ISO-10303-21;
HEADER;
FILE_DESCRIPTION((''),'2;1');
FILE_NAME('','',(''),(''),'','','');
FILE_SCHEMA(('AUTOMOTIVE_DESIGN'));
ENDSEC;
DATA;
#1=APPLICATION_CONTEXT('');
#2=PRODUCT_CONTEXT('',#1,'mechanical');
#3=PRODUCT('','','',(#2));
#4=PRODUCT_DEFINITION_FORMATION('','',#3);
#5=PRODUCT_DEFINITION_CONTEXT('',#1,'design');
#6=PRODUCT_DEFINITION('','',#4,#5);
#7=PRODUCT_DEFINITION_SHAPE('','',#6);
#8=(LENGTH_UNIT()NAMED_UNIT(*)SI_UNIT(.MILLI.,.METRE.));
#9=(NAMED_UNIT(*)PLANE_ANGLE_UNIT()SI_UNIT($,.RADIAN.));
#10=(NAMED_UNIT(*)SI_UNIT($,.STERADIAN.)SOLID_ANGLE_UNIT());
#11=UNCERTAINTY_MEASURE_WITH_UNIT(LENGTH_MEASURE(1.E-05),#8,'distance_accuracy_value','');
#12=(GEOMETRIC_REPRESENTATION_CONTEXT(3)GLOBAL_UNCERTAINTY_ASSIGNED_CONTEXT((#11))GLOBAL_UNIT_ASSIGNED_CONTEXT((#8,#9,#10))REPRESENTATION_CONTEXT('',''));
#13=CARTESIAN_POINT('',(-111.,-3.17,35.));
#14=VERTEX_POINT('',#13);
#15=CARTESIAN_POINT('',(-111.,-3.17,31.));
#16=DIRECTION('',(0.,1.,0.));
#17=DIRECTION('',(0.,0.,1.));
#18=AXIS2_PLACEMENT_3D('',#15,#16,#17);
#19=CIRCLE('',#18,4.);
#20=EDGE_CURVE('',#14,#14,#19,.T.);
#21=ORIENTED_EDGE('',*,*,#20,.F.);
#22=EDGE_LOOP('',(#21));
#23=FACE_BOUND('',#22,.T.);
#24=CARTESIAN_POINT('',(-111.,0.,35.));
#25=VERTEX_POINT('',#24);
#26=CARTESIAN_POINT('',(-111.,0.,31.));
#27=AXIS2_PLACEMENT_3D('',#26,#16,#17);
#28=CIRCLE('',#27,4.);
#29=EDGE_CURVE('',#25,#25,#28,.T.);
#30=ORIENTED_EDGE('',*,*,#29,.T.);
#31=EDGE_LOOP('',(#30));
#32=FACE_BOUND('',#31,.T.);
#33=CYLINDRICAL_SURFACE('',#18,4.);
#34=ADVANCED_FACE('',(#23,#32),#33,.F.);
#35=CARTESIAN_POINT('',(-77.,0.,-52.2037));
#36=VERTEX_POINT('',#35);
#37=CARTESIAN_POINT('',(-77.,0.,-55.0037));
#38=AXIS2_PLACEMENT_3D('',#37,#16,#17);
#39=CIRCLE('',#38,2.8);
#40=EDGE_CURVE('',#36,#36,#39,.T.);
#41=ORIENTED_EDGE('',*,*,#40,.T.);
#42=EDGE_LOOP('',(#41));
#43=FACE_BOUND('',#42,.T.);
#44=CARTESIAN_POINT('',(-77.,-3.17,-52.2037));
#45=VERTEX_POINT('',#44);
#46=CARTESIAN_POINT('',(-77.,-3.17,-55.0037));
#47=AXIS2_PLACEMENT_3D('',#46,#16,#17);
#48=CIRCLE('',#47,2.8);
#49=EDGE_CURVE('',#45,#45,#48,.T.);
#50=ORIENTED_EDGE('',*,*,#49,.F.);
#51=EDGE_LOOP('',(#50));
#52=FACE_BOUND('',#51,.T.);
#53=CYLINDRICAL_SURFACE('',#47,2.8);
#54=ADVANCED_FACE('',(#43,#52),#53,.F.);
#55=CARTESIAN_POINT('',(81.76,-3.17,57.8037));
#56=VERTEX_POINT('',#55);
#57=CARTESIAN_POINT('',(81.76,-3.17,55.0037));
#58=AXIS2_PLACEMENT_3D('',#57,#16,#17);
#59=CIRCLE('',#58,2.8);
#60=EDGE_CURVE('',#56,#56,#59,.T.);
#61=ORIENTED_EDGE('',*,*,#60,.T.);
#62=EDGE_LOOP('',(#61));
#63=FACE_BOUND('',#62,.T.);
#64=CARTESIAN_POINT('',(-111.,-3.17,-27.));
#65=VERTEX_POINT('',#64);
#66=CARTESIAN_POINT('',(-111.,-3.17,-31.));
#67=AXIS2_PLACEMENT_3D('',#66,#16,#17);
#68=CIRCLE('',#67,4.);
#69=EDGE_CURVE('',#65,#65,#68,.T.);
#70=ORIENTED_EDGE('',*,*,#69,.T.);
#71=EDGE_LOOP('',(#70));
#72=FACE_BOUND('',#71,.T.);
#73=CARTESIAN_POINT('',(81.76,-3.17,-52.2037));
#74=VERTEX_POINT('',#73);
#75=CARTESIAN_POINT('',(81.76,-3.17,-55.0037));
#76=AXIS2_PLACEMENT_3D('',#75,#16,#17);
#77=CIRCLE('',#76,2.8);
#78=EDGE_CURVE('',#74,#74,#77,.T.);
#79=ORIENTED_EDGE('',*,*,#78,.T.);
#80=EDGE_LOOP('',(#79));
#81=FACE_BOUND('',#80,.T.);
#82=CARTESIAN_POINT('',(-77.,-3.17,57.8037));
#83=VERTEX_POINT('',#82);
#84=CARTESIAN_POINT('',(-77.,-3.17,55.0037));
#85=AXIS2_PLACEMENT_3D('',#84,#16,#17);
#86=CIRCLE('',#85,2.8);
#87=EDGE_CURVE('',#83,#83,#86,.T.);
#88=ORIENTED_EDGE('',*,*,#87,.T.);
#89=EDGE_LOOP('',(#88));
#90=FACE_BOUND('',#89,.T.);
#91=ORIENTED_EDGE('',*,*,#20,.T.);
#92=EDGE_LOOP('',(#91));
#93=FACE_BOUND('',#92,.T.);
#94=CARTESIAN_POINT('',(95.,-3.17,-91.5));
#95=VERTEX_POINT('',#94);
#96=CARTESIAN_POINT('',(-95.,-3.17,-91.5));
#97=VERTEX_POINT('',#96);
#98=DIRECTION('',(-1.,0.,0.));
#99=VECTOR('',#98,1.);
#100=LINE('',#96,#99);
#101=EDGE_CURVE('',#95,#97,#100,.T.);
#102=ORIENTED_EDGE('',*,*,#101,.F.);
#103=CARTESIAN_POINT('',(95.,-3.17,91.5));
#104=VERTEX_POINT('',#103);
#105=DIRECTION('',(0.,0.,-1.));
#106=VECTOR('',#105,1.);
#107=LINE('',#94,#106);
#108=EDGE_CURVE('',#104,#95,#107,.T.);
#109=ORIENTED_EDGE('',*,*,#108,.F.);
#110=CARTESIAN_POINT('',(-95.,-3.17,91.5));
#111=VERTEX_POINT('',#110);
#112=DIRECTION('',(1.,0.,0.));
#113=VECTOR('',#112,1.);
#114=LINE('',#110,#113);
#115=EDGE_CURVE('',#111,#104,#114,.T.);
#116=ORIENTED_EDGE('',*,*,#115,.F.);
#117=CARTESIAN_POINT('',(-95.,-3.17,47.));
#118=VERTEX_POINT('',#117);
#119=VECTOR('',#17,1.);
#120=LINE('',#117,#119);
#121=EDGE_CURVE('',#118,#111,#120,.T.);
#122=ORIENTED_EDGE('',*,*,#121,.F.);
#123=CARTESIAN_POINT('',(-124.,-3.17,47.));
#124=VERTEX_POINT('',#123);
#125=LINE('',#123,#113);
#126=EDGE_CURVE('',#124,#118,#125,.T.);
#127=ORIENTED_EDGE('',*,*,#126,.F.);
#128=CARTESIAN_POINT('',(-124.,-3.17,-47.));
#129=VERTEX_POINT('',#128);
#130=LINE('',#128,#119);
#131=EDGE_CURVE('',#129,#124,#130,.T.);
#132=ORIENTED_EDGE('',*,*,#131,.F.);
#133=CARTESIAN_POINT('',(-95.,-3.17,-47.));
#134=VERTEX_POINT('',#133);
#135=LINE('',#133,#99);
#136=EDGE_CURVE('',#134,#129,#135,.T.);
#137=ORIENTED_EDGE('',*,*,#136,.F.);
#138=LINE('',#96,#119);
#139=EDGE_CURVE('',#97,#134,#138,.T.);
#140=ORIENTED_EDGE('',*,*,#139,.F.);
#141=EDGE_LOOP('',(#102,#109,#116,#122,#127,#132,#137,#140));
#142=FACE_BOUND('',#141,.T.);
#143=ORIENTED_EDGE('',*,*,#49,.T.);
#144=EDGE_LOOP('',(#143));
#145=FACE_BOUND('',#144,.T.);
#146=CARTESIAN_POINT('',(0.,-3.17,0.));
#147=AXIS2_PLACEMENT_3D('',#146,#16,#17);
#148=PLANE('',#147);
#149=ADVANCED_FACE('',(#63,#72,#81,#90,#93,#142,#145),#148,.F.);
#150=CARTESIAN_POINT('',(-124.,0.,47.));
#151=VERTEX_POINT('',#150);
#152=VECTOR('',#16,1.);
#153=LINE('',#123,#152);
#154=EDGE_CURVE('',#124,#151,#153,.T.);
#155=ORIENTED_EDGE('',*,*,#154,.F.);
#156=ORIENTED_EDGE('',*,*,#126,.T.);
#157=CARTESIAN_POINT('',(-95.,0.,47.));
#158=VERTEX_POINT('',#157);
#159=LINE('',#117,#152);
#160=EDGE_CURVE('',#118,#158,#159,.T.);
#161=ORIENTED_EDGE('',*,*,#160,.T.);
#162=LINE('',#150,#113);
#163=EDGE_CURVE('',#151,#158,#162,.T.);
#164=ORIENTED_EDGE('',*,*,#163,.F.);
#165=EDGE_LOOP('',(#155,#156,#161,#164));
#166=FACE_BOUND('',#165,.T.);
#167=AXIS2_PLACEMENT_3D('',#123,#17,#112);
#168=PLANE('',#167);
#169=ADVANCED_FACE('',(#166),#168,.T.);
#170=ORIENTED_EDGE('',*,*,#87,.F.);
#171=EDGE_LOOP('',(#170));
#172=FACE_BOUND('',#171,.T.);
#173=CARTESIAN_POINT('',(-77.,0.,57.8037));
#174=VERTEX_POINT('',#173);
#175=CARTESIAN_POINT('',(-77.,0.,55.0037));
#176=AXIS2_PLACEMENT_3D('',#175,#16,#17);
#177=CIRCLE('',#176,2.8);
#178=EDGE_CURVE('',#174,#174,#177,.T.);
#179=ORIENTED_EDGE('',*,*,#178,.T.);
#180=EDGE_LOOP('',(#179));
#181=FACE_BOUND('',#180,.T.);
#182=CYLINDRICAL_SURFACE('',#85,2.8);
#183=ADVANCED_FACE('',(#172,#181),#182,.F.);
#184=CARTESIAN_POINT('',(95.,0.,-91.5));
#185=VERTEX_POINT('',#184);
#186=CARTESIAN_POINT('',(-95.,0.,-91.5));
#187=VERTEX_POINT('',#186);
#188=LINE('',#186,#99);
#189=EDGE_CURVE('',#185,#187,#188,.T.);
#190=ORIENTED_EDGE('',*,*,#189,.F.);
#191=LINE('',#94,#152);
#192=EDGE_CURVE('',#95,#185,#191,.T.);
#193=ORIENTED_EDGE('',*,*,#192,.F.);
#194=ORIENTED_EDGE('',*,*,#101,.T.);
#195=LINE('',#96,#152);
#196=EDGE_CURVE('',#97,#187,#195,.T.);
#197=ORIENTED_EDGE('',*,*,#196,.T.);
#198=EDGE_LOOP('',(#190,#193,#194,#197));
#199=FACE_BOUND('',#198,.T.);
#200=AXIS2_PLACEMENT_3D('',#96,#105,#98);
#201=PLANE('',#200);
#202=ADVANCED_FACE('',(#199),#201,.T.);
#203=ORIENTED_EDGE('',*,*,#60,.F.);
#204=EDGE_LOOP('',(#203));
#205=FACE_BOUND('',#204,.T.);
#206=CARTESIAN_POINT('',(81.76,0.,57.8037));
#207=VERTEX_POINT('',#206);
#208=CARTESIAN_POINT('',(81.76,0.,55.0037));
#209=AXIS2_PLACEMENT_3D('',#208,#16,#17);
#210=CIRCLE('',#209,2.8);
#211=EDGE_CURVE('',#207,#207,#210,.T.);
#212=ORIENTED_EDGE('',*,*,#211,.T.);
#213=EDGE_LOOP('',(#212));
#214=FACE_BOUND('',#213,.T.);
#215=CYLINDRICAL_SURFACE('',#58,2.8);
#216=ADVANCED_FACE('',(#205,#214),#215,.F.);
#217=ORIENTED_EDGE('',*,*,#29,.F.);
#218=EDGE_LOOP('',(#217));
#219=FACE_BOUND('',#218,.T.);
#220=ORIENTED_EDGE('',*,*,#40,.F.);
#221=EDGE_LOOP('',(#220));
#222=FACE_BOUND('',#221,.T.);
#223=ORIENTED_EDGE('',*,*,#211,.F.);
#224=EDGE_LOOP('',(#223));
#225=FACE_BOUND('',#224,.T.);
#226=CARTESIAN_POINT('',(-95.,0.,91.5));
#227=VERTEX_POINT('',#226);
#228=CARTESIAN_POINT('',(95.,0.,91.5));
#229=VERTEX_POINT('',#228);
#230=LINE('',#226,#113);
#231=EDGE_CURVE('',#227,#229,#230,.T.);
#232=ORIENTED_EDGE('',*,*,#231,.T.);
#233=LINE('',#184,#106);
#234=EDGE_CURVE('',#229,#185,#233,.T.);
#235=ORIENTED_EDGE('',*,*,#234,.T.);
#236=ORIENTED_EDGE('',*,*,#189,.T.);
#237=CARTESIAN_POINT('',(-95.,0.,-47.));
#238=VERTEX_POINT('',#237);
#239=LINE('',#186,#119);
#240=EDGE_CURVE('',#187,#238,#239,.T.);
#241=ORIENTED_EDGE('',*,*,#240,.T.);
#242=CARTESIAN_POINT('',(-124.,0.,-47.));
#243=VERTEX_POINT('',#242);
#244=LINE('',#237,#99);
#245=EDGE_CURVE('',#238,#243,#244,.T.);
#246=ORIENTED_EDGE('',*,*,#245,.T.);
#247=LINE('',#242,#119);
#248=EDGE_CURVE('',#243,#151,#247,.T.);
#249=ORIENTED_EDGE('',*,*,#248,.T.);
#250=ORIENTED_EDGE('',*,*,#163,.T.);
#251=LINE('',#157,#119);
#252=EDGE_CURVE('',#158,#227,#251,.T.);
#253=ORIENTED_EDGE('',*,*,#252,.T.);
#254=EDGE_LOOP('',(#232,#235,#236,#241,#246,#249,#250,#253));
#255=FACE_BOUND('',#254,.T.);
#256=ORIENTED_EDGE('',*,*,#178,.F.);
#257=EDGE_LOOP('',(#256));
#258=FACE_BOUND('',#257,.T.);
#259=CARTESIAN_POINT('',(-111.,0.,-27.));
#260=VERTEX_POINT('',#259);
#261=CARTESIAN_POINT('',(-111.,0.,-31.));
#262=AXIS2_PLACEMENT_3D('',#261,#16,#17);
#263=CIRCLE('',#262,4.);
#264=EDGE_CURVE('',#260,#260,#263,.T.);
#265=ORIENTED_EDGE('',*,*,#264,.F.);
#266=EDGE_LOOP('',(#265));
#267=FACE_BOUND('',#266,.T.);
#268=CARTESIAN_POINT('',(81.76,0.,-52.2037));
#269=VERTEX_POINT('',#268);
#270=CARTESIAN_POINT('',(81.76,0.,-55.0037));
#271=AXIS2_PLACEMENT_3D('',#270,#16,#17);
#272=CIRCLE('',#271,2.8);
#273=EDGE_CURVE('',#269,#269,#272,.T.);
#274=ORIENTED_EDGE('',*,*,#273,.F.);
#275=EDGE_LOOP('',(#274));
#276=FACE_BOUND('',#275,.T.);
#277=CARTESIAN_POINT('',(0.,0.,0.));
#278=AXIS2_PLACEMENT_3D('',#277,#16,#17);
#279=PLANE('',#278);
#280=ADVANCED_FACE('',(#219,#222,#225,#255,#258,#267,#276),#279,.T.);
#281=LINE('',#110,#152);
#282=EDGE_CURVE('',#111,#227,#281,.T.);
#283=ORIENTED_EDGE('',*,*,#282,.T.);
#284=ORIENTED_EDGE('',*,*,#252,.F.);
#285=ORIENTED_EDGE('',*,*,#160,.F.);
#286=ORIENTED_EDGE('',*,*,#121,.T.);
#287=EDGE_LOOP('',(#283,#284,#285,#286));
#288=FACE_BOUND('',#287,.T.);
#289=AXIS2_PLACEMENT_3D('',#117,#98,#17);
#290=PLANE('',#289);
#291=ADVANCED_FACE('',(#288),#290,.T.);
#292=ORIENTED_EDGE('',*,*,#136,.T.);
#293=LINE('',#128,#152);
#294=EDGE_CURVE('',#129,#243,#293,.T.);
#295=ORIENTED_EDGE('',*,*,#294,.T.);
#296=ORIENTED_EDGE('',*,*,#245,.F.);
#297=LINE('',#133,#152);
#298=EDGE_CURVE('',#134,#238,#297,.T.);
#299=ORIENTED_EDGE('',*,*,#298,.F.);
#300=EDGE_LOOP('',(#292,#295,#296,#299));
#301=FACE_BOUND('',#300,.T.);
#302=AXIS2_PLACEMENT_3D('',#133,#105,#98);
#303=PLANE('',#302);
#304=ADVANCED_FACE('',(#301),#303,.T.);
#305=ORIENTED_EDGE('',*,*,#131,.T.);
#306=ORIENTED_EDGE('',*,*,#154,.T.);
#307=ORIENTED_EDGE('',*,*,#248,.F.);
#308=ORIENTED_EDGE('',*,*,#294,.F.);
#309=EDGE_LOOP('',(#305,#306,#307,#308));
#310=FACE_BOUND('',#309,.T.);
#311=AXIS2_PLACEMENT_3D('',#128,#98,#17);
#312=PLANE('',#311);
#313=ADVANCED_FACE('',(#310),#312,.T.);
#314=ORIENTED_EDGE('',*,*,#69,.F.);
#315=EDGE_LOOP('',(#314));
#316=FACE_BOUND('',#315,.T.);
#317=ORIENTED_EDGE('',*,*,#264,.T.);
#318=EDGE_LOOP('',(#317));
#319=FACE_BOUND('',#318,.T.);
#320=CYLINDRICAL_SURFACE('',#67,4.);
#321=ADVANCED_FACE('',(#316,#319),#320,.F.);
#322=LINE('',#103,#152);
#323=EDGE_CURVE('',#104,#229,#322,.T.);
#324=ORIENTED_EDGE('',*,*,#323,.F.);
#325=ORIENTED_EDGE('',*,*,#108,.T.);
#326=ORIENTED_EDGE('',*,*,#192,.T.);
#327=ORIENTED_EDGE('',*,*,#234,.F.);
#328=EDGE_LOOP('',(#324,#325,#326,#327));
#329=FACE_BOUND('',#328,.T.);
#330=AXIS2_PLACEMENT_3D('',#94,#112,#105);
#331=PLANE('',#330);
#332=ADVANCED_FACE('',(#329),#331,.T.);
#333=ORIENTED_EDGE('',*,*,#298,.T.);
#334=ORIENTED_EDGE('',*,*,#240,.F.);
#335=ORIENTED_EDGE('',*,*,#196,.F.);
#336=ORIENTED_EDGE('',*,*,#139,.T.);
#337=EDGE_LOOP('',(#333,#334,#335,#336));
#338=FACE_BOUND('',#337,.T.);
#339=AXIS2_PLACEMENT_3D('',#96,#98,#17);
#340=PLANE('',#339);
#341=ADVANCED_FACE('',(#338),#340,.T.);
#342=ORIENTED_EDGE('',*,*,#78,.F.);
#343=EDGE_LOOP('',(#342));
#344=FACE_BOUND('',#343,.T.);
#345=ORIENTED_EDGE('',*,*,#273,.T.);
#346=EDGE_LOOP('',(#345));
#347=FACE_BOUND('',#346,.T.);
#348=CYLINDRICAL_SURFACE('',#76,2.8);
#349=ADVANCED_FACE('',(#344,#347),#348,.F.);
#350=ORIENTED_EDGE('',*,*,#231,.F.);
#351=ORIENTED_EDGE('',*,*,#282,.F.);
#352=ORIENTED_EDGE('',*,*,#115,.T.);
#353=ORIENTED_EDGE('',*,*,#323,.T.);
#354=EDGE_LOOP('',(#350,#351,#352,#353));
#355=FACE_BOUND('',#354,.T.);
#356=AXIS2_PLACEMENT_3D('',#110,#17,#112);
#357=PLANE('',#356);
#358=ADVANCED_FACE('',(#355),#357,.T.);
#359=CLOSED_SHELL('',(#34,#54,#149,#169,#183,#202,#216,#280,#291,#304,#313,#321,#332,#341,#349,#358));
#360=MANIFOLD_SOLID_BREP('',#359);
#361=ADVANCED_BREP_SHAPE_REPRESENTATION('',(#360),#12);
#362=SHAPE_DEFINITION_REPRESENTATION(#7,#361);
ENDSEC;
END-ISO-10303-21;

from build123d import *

# Parameters (mm, degrees)
SKETCH1_R          = 2.8
SKETCH1_R_2        = 4
BASE_FLANGE1_DEPTH = 3.17


# Sheet-metal steps are written as plain solids
with BuildPart() as part:
    # Sketch1 → Base-Flange1 (new body)
    with BuildSketch(Plane(origin=(0, 0, 0), x_dir=(1, 0, 0), z_dir=(0, 1, 0))):
        Polygon((-95, 91.5), (95, 91.5), (95, -91.5), (-95, -91.5), (-95, -47), (-124, -47), (-124, 47), (-95, 47), align=None)
        with Locations(Location((-77, 55.0037, 0), (0, 0, 270))):
            Circle(SKETCH1_R, mode=Mode.SUBTRACT)
        with Locations(Location((-77, -55.0037, 0), (0, 0, 270))):
            Circle(SKETCH1_R, mode=Mode.SUBTRACT)
        with Locations(Location((81.76, -55.0037, 0), (0, 0, 270))):
            Circle(SKETCH1_R, mode=Mode.SUBTRACT)
        with Locations(Location((81.76, 55.0037, 0), (0, 0, 270))):
            Circle(SKETCH1_R, mode=Mode.SUBTRACT)
        with Locations(Location((-111, 31, 0), (0, 0, 270))):
            Circle(SKETCH1_R_2, mode=Mode.SUBTRACT)
        with Locations(Location((-111, -31, 0), (0, 0, 270))):
            Circle(SKETCH1_R_2, mode=Mode.SUBTRACT)
    extrude(amount=-BASE_FLANGE1_DEPTH)


solid = part.part
